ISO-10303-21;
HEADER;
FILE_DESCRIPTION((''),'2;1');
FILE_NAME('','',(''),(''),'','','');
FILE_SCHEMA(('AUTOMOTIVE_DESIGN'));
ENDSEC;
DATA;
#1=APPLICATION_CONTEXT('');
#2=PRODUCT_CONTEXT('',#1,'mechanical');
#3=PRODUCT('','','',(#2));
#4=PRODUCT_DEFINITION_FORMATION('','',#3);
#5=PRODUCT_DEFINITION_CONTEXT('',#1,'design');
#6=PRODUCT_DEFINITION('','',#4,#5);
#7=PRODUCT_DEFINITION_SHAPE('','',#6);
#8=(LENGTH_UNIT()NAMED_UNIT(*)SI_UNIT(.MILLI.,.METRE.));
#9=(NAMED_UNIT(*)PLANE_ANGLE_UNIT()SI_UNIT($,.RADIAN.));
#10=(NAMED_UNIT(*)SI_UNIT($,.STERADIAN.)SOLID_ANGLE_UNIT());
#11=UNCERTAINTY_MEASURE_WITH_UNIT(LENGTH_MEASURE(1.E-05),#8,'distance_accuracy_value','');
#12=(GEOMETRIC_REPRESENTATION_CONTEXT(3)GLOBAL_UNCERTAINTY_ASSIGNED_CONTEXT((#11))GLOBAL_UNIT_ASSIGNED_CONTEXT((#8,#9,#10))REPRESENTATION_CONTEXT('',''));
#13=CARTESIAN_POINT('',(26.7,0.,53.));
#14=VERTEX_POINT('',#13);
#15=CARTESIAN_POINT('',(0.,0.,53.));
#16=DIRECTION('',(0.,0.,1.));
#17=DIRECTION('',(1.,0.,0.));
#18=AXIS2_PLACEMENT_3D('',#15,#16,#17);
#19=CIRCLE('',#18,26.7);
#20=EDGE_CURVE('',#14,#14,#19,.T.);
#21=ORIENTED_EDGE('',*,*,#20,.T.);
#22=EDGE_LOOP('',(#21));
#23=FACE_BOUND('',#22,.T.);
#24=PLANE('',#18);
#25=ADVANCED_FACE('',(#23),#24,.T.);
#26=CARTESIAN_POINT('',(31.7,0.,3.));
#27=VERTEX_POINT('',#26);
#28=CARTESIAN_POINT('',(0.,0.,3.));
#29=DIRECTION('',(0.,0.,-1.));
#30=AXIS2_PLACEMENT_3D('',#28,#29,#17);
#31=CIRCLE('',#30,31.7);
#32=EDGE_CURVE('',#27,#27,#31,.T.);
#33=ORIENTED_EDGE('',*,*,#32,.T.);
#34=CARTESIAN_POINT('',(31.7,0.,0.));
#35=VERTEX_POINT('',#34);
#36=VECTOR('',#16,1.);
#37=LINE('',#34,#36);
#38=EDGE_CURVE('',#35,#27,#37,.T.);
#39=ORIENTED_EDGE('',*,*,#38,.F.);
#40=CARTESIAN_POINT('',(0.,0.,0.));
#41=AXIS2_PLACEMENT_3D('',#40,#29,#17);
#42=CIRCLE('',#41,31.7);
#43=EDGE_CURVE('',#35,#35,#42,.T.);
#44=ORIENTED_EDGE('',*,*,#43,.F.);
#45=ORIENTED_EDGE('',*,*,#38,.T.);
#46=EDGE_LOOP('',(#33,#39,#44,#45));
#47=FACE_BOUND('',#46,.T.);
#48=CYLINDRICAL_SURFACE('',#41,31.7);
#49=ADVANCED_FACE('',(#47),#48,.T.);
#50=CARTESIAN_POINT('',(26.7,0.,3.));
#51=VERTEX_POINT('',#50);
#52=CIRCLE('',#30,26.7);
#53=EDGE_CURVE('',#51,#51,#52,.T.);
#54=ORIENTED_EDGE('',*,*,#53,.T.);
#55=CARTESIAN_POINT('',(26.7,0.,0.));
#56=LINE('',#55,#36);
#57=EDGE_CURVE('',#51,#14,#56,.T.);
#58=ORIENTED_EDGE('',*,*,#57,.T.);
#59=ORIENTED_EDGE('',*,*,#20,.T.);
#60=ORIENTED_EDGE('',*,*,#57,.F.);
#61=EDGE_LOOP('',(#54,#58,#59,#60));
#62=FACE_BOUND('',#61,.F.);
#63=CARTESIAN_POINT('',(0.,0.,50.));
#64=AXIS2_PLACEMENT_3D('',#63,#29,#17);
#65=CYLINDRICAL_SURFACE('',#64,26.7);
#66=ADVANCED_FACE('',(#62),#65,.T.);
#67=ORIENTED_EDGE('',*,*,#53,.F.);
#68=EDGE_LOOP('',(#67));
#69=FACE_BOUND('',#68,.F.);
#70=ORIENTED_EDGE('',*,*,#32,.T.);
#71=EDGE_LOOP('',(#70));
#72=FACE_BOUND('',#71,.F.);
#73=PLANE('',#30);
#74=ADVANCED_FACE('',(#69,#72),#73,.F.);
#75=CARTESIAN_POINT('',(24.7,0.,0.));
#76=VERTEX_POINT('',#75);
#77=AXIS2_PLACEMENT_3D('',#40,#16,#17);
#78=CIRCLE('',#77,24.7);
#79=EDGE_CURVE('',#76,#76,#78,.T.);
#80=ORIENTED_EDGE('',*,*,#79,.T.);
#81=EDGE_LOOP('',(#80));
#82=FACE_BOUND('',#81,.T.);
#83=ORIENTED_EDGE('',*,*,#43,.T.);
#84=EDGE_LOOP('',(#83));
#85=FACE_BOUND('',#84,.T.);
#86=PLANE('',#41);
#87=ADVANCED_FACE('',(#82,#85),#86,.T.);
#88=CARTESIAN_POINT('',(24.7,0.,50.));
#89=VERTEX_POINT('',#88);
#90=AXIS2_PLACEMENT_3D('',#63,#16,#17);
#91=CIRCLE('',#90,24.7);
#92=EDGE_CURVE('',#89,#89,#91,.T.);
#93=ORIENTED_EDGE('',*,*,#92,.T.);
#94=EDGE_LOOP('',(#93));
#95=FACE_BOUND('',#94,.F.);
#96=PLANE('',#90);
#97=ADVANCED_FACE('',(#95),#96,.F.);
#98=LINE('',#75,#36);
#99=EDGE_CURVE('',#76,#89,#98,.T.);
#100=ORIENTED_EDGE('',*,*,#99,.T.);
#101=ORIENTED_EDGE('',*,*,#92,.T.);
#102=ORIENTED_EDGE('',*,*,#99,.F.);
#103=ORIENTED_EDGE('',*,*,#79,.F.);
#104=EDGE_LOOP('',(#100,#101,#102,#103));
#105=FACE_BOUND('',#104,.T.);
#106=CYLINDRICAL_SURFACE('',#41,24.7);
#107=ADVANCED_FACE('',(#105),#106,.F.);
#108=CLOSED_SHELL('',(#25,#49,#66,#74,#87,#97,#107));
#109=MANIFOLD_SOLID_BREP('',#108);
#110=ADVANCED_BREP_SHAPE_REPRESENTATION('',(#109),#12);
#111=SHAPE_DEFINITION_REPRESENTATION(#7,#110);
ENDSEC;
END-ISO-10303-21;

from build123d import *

# Parameters (mm, degrees)
F0_R     = 26.7
F0_R_2   = 24.7
F1_DEPTH = 50
F2_R     = 26.7
F3_DEPTH = 3
F4_R     = 31.7
F4_R_2   = 26.7
F4_R_3   = 24.7
F5_DEPTH = 3


with BuildPart() as f1:
    # F0 (on Top) → F1 (new body)
    with BuildSketch(Plane.XY):
        Circle(F0_R)
        Circle(F0_R_2, mode=Mode.SUBTRACT)
    extrude(amount=F1_DEPTH)

    # F2 (on face) → F3 (join)
    with BuildSketch(Plane.XY.offset(50)):
        Circle(F2_R)
    extrude(amount=F3_DEPTH)

    # F4 (on face) → F5 (join)
    with BuildSketch(Plane(origin=(0, 0, 0), x_dir=(1, 0, 0), z_dir=(0, 0, -1))):
        Circle(F4_R)
        Circle(F4_R_2, mode=Mode.SUBTRACT)
        Circle(F4_R_2)
        Circle(F4_R_3, mode=Mode.SUBTRACT)
    extrude(amount=-F5_DEPTH)


solid = f1.part
